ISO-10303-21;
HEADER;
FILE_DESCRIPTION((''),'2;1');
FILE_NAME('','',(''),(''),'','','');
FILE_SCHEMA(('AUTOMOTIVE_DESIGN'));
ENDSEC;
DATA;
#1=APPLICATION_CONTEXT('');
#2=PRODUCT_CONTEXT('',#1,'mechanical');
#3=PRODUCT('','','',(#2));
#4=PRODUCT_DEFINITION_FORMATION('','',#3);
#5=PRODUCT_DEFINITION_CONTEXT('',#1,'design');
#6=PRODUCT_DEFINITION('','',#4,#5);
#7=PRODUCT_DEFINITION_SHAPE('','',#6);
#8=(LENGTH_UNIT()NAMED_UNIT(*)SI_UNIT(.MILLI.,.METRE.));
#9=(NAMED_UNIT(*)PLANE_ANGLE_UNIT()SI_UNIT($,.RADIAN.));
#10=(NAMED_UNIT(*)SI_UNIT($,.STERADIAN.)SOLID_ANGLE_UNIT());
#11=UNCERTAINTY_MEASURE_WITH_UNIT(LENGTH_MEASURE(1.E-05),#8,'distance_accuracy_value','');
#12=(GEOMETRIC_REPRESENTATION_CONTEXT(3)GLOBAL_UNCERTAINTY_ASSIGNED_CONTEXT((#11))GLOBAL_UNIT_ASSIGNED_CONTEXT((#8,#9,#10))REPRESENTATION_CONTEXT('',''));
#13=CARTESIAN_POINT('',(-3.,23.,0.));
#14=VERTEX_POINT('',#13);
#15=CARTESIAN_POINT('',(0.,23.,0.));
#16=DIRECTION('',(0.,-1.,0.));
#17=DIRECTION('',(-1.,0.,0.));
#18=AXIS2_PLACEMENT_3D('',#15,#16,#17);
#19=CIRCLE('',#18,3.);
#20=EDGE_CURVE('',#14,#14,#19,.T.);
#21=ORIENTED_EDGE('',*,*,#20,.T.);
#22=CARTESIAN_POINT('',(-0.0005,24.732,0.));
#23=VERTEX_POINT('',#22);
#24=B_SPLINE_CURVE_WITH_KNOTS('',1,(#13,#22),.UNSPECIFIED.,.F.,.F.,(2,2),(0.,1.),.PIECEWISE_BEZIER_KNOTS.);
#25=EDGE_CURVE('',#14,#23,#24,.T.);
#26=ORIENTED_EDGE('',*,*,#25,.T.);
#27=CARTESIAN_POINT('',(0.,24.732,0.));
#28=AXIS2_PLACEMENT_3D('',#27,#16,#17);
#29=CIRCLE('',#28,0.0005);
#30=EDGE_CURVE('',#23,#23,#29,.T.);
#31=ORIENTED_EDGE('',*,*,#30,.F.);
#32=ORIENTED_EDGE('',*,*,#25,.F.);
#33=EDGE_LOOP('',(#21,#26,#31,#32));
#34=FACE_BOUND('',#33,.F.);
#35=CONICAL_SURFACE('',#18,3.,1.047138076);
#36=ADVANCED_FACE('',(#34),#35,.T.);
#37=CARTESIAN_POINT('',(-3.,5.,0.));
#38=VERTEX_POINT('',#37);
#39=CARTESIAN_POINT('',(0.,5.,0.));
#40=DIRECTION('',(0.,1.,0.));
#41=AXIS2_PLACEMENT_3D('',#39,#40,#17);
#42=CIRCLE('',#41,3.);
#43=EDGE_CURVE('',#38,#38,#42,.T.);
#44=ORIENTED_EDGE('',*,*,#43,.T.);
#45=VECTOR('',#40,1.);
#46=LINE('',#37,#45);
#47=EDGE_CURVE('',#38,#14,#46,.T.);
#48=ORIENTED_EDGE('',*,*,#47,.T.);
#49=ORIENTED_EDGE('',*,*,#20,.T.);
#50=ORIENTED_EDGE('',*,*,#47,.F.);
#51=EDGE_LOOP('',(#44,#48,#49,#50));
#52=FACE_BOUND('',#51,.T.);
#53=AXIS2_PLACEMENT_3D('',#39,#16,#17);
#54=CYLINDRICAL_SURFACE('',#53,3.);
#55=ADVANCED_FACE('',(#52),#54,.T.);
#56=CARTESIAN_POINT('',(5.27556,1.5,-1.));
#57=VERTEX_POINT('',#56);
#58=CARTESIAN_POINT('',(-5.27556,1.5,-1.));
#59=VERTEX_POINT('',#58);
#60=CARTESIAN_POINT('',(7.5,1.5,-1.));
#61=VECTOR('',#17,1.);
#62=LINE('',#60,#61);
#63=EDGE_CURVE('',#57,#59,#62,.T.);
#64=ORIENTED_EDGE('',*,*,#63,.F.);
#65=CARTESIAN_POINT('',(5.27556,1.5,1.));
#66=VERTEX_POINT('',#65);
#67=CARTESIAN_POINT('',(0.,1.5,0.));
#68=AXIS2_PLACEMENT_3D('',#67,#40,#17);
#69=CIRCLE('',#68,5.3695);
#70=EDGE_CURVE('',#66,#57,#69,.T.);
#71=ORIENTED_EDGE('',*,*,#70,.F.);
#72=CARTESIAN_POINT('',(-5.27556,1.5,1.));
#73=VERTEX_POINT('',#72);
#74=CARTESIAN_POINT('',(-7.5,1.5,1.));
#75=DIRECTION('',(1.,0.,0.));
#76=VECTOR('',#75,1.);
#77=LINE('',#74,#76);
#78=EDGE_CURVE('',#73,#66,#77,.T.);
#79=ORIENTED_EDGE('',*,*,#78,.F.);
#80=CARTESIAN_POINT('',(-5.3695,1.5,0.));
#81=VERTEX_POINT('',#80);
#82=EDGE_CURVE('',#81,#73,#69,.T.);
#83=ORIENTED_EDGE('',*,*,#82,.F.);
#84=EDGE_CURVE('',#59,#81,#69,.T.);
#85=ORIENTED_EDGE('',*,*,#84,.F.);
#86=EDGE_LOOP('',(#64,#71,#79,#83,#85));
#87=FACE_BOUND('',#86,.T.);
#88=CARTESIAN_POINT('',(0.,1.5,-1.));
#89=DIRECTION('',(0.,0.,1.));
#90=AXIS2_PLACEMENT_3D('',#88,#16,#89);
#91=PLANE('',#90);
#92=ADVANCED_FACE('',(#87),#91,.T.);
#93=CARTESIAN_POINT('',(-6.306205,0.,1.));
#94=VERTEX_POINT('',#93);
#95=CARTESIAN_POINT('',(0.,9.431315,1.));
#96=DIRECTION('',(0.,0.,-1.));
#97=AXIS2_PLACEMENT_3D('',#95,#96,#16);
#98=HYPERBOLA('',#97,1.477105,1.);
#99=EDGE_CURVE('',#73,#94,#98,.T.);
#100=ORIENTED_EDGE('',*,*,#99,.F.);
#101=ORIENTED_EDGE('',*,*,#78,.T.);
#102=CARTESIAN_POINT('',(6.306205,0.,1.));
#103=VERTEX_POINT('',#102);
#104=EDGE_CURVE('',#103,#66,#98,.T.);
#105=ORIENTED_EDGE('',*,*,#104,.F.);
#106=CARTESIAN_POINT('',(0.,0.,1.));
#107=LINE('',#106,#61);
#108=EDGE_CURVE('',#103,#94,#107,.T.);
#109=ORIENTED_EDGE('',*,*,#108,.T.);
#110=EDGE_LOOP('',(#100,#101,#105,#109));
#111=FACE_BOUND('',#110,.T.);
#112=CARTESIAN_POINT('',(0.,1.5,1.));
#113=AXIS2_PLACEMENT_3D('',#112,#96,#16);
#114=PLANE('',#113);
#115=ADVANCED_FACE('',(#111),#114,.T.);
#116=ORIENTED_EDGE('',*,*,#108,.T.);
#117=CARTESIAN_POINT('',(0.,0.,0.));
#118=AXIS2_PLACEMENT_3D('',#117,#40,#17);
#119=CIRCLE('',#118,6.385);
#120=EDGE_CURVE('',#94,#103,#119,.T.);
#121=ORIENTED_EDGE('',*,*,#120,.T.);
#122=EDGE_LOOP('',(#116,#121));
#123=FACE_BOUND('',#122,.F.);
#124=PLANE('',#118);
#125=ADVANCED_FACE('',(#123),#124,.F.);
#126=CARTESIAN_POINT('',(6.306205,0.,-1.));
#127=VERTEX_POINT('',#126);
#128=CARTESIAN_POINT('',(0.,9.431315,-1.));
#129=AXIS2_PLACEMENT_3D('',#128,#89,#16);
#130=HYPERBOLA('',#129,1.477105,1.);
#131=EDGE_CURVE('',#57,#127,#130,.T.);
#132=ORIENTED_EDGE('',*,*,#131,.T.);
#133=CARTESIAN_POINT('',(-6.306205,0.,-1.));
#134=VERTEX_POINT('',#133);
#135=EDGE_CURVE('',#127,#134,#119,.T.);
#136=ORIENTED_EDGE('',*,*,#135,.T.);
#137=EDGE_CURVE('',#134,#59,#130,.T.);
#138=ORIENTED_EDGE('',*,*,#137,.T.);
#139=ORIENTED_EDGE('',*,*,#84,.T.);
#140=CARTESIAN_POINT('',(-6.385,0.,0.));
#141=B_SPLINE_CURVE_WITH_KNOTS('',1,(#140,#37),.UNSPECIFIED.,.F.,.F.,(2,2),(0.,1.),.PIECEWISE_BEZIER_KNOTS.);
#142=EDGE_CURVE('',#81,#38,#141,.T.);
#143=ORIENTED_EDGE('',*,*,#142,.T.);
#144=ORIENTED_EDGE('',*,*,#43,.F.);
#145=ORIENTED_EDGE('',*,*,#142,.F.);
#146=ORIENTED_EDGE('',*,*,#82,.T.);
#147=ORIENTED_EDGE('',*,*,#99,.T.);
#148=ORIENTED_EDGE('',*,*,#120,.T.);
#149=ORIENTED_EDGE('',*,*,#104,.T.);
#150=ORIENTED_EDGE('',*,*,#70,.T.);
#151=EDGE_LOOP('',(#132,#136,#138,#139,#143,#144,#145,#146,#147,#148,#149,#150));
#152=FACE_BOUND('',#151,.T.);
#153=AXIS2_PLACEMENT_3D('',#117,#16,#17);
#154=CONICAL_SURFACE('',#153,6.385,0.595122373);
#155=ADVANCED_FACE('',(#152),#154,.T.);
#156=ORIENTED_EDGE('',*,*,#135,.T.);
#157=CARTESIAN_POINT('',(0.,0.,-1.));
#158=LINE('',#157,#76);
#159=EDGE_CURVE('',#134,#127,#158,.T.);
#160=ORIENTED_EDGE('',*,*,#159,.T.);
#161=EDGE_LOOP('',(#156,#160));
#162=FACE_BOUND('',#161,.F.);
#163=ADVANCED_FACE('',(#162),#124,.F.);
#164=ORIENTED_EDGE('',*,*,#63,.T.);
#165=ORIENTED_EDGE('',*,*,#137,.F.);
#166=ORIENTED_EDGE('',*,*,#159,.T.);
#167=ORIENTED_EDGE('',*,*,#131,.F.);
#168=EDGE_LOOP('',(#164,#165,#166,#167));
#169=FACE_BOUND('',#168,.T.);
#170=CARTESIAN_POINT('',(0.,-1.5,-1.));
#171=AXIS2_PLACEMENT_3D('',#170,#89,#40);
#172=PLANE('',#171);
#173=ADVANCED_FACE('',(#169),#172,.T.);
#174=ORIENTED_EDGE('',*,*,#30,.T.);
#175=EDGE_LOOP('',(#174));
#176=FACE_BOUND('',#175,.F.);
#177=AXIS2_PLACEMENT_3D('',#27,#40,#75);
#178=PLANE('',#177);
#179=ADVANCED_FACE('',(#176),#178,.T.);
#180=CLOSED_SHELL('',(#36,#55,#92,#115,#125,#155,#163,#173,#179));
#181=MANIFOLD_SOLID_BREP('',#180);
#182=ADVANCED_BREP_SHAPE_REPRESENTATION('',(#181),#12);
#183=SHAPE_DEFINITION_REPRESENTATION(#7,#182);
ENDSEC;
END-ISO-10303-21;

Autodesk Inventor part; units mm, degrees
ref_plane "YZ Plane" through (0, 0, 0) normal (1, 0, 0) x (0, 1, 0)
sketch "Sketch1" plane through (0, 0, 0) normal (0, 1, 0) x (-1, 0, 0)
  circle A0 centre (0, 0) radius 6.385
  dimension "d0" = 12.77
ref_plane "Work Plane1" through (0, 5, 0) normal (0, 1, 0) x (-1, 0, 0)
sketch "Sketch2" plane through (0, 5, 0) normal (0, 1, 0) x (-1, 0, 0)
  circle A0 centre (0, 0) radius 3
  dimension "d2" = 6
extrude "Extrusion1" add sketch "Sketch2" along normal blind 18
loft "Loft1" add profiles "Sketch1" section 2 edges at (3, 5, 0)
sketch "Sketch3" plane through (0, 0, 0) normal (1, 0, 0) x (0, 1, 0)
  line L0 (1.5, 1) -> (-1.5, 1)
  line L1 (-1.5, 1) -> (-1.5, -1)
  line L2 (-1.5, -1) -> (1.5, -1)
  line L3 (1.5, -1) -> (1.5, 1)
  line L4 (1.5, 1) -> (-1.5, -1) construction
  line L5 (-1.5, 1) -> (1.5, -1) construction
  point P0 (0, 0)
  dimension "d9" = 3
  dimension "d10" = 2
extrude "Extrusion2" cut sketch "Sketch3" along normal mid plane 15
sketch "Sketch5" plane through (0, 0, 0) normal (1, 0, 0) x (0, 1, 0)
  line L0 (23, -3) -> (23, 3) projected
  line L1 (23, 3) -> (24.7321, 0)
  line L2 (24.7321, 0) -> (23, -3)
  line L3 (23, -3) -> (23, 3)
  point P0 (0, 0)
  dimension "d13" = 120
sketch "Sketch8" plane through (0, 0, 0) normal (1, 0, 0) x (0, 1, 0)
  point P0 (0, 0)
ref_plane "Work Plane2" through (0, 24.732, 0) normal (0, 1, 0) x (1, 0, 0)
sketch "Sketch9" plane through (0, 24.732, 0) normal (0, 1, 0) x (1, 0, 0)
  circle A0 centre (0, 0) radius 0.0005
  dimension "d15" = 0.001
loft "Loft2" add profiles "Sketch9" section 1 edges at (3, 23, 0)
